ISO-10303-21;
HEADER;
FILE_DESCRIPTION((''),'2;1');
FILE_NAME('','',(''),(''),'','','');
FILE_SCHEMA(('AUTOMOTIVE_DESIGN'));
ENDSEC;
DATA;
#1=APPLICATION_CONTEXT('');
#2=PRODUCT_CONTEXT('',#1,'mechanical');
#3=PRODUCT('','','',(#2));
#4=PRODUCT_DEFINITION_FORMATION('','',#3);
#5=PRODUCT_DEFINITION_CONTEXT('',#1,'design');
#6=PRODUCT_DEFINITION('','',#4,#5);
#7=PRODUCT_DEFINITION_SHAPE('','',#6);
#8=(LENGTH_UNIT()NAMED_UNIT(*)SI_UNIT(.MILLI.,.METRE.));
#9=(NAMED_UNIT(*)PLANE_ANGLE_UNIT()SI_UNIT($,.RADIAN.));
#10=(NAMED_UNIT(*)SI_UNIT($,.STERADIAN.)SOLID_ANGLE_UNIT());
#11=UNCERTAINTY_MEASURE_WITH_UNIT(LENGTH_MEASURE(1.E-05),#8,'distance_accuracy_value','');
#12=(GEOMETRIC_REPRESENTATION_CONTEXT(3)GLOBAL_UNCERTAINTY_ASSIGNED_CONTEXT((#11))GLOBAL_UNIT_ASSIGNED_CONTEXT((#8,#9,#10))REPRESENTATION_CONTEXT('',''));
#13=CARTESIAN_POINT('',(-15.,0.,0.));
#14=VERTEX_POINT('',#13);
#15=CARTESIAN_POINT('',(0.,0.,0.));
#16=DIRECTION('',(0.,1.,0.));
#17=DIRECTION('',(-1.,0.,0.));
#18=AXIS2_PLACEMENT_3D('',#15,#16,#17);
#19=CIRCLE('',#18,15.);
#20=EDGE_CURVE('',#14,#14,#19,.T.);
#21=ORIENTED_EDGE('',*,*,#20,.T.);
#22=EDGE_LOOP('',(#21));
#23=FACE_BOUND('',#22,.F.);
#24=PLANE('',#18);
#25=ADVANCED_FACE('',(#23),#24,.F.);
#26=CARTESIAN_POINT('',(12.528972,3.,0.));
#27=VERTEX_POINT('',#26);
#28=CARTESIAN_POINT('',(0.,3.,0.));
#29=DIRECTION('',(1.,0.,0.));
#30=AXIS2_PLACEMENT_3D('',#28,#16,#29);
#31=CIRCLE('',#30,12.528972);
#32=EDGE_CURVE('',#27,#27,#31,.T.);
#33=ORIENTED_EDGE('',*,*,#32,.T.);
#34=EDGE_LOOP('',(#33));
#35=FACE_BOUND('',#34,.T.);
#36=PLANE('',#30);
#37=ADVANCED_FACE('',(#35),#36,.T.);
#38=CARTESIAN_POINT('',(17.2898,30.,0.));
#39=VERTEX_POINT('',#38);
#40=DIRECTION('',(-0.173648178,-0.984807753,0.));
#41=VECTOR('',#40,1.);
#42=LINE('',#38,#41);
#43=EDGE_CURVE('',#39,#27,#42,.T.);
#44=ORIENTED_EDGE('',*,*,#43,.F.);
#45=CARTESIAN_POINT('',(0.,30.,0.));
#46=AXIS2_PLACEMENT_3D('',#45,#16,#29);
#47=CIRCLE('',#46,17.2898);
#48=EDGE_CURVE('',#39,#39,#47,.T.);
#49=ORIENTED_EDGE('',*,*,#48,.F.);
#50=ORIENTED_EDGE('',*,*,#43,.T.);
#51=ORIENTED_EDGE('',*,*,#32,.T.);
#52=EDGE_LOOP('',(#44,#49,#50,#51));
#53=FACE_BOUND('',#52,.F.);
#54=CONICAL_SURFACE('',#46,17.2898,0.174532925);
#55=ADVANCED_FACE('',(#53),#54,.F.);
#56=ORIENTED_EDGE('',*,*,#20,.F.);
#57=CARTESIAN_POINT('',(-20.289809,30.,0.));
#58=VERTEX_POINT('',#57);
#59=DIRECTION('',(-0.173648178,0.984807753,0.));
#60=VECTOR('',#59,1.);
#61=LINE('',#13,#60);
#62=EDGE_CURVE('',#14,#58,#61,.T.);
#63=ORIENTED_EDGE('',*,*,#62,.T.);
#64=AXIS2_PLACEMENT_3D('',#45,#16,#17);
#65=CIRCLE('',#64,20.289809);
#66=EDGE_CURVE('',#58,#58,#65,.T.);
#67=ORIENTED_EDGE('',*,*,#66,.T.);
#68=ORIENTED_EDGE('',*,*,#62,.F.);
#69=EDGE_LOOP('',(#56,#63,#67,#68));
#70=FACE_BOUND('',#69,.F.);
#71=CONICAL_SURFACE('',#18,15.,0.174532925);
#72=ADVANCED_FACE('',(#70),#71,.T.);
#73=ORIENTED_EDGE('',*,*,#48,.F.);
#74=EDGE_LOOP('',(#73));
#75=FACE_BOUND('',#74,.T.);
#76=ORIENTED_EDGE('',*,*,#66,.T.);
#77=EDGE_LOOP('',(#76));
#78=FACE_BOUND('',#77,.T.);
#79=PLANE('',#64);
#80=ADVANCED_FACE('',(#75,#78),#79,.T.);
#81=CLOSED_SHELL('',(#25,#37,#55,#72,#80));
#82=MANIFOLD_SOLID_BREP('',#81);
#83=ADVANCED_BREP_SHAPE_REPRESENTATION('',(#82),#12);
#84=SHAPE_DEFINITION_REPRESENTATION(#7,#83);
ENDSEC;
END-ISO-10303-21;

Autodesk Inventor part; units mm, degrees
ref_plane "YZ Plane" through (0, 0, 0) normal (1, 0, 0) x (0, 1, 0)
ref_plane "XZ Plane" through (0, 0, 0) normal (0, 1, 0) x (-1, 0, 0)
ref_plane "XY Plane" through (0, 0, 0) normal (0, 0, 1) x (1, 0, 0)
sketch "Sketch1" plane through (0, 0, 0) normal (0, 1, 0) x (-1, 0, 0)
  circle A0 centre (0, 0) radius 15
  dimension "d0" = 30
extrude "Extrusion1" add sketch "Sketch1" along normal blind 30 draft 10
sketch "Sketch3" plane through (0, 30, 0) normal (0, 1, 0) x (1, 0, 0)
  circle A0 centre (0, 0) radius 17.2898
  circle A1 centre (0, 0) radius 20.2898 projected
  dimension "d3" = 3
extrude "Extrusion2" cut sketch "Sketch3" against normal blind 27 draft -10 contours A0
properties part number "mortar"
